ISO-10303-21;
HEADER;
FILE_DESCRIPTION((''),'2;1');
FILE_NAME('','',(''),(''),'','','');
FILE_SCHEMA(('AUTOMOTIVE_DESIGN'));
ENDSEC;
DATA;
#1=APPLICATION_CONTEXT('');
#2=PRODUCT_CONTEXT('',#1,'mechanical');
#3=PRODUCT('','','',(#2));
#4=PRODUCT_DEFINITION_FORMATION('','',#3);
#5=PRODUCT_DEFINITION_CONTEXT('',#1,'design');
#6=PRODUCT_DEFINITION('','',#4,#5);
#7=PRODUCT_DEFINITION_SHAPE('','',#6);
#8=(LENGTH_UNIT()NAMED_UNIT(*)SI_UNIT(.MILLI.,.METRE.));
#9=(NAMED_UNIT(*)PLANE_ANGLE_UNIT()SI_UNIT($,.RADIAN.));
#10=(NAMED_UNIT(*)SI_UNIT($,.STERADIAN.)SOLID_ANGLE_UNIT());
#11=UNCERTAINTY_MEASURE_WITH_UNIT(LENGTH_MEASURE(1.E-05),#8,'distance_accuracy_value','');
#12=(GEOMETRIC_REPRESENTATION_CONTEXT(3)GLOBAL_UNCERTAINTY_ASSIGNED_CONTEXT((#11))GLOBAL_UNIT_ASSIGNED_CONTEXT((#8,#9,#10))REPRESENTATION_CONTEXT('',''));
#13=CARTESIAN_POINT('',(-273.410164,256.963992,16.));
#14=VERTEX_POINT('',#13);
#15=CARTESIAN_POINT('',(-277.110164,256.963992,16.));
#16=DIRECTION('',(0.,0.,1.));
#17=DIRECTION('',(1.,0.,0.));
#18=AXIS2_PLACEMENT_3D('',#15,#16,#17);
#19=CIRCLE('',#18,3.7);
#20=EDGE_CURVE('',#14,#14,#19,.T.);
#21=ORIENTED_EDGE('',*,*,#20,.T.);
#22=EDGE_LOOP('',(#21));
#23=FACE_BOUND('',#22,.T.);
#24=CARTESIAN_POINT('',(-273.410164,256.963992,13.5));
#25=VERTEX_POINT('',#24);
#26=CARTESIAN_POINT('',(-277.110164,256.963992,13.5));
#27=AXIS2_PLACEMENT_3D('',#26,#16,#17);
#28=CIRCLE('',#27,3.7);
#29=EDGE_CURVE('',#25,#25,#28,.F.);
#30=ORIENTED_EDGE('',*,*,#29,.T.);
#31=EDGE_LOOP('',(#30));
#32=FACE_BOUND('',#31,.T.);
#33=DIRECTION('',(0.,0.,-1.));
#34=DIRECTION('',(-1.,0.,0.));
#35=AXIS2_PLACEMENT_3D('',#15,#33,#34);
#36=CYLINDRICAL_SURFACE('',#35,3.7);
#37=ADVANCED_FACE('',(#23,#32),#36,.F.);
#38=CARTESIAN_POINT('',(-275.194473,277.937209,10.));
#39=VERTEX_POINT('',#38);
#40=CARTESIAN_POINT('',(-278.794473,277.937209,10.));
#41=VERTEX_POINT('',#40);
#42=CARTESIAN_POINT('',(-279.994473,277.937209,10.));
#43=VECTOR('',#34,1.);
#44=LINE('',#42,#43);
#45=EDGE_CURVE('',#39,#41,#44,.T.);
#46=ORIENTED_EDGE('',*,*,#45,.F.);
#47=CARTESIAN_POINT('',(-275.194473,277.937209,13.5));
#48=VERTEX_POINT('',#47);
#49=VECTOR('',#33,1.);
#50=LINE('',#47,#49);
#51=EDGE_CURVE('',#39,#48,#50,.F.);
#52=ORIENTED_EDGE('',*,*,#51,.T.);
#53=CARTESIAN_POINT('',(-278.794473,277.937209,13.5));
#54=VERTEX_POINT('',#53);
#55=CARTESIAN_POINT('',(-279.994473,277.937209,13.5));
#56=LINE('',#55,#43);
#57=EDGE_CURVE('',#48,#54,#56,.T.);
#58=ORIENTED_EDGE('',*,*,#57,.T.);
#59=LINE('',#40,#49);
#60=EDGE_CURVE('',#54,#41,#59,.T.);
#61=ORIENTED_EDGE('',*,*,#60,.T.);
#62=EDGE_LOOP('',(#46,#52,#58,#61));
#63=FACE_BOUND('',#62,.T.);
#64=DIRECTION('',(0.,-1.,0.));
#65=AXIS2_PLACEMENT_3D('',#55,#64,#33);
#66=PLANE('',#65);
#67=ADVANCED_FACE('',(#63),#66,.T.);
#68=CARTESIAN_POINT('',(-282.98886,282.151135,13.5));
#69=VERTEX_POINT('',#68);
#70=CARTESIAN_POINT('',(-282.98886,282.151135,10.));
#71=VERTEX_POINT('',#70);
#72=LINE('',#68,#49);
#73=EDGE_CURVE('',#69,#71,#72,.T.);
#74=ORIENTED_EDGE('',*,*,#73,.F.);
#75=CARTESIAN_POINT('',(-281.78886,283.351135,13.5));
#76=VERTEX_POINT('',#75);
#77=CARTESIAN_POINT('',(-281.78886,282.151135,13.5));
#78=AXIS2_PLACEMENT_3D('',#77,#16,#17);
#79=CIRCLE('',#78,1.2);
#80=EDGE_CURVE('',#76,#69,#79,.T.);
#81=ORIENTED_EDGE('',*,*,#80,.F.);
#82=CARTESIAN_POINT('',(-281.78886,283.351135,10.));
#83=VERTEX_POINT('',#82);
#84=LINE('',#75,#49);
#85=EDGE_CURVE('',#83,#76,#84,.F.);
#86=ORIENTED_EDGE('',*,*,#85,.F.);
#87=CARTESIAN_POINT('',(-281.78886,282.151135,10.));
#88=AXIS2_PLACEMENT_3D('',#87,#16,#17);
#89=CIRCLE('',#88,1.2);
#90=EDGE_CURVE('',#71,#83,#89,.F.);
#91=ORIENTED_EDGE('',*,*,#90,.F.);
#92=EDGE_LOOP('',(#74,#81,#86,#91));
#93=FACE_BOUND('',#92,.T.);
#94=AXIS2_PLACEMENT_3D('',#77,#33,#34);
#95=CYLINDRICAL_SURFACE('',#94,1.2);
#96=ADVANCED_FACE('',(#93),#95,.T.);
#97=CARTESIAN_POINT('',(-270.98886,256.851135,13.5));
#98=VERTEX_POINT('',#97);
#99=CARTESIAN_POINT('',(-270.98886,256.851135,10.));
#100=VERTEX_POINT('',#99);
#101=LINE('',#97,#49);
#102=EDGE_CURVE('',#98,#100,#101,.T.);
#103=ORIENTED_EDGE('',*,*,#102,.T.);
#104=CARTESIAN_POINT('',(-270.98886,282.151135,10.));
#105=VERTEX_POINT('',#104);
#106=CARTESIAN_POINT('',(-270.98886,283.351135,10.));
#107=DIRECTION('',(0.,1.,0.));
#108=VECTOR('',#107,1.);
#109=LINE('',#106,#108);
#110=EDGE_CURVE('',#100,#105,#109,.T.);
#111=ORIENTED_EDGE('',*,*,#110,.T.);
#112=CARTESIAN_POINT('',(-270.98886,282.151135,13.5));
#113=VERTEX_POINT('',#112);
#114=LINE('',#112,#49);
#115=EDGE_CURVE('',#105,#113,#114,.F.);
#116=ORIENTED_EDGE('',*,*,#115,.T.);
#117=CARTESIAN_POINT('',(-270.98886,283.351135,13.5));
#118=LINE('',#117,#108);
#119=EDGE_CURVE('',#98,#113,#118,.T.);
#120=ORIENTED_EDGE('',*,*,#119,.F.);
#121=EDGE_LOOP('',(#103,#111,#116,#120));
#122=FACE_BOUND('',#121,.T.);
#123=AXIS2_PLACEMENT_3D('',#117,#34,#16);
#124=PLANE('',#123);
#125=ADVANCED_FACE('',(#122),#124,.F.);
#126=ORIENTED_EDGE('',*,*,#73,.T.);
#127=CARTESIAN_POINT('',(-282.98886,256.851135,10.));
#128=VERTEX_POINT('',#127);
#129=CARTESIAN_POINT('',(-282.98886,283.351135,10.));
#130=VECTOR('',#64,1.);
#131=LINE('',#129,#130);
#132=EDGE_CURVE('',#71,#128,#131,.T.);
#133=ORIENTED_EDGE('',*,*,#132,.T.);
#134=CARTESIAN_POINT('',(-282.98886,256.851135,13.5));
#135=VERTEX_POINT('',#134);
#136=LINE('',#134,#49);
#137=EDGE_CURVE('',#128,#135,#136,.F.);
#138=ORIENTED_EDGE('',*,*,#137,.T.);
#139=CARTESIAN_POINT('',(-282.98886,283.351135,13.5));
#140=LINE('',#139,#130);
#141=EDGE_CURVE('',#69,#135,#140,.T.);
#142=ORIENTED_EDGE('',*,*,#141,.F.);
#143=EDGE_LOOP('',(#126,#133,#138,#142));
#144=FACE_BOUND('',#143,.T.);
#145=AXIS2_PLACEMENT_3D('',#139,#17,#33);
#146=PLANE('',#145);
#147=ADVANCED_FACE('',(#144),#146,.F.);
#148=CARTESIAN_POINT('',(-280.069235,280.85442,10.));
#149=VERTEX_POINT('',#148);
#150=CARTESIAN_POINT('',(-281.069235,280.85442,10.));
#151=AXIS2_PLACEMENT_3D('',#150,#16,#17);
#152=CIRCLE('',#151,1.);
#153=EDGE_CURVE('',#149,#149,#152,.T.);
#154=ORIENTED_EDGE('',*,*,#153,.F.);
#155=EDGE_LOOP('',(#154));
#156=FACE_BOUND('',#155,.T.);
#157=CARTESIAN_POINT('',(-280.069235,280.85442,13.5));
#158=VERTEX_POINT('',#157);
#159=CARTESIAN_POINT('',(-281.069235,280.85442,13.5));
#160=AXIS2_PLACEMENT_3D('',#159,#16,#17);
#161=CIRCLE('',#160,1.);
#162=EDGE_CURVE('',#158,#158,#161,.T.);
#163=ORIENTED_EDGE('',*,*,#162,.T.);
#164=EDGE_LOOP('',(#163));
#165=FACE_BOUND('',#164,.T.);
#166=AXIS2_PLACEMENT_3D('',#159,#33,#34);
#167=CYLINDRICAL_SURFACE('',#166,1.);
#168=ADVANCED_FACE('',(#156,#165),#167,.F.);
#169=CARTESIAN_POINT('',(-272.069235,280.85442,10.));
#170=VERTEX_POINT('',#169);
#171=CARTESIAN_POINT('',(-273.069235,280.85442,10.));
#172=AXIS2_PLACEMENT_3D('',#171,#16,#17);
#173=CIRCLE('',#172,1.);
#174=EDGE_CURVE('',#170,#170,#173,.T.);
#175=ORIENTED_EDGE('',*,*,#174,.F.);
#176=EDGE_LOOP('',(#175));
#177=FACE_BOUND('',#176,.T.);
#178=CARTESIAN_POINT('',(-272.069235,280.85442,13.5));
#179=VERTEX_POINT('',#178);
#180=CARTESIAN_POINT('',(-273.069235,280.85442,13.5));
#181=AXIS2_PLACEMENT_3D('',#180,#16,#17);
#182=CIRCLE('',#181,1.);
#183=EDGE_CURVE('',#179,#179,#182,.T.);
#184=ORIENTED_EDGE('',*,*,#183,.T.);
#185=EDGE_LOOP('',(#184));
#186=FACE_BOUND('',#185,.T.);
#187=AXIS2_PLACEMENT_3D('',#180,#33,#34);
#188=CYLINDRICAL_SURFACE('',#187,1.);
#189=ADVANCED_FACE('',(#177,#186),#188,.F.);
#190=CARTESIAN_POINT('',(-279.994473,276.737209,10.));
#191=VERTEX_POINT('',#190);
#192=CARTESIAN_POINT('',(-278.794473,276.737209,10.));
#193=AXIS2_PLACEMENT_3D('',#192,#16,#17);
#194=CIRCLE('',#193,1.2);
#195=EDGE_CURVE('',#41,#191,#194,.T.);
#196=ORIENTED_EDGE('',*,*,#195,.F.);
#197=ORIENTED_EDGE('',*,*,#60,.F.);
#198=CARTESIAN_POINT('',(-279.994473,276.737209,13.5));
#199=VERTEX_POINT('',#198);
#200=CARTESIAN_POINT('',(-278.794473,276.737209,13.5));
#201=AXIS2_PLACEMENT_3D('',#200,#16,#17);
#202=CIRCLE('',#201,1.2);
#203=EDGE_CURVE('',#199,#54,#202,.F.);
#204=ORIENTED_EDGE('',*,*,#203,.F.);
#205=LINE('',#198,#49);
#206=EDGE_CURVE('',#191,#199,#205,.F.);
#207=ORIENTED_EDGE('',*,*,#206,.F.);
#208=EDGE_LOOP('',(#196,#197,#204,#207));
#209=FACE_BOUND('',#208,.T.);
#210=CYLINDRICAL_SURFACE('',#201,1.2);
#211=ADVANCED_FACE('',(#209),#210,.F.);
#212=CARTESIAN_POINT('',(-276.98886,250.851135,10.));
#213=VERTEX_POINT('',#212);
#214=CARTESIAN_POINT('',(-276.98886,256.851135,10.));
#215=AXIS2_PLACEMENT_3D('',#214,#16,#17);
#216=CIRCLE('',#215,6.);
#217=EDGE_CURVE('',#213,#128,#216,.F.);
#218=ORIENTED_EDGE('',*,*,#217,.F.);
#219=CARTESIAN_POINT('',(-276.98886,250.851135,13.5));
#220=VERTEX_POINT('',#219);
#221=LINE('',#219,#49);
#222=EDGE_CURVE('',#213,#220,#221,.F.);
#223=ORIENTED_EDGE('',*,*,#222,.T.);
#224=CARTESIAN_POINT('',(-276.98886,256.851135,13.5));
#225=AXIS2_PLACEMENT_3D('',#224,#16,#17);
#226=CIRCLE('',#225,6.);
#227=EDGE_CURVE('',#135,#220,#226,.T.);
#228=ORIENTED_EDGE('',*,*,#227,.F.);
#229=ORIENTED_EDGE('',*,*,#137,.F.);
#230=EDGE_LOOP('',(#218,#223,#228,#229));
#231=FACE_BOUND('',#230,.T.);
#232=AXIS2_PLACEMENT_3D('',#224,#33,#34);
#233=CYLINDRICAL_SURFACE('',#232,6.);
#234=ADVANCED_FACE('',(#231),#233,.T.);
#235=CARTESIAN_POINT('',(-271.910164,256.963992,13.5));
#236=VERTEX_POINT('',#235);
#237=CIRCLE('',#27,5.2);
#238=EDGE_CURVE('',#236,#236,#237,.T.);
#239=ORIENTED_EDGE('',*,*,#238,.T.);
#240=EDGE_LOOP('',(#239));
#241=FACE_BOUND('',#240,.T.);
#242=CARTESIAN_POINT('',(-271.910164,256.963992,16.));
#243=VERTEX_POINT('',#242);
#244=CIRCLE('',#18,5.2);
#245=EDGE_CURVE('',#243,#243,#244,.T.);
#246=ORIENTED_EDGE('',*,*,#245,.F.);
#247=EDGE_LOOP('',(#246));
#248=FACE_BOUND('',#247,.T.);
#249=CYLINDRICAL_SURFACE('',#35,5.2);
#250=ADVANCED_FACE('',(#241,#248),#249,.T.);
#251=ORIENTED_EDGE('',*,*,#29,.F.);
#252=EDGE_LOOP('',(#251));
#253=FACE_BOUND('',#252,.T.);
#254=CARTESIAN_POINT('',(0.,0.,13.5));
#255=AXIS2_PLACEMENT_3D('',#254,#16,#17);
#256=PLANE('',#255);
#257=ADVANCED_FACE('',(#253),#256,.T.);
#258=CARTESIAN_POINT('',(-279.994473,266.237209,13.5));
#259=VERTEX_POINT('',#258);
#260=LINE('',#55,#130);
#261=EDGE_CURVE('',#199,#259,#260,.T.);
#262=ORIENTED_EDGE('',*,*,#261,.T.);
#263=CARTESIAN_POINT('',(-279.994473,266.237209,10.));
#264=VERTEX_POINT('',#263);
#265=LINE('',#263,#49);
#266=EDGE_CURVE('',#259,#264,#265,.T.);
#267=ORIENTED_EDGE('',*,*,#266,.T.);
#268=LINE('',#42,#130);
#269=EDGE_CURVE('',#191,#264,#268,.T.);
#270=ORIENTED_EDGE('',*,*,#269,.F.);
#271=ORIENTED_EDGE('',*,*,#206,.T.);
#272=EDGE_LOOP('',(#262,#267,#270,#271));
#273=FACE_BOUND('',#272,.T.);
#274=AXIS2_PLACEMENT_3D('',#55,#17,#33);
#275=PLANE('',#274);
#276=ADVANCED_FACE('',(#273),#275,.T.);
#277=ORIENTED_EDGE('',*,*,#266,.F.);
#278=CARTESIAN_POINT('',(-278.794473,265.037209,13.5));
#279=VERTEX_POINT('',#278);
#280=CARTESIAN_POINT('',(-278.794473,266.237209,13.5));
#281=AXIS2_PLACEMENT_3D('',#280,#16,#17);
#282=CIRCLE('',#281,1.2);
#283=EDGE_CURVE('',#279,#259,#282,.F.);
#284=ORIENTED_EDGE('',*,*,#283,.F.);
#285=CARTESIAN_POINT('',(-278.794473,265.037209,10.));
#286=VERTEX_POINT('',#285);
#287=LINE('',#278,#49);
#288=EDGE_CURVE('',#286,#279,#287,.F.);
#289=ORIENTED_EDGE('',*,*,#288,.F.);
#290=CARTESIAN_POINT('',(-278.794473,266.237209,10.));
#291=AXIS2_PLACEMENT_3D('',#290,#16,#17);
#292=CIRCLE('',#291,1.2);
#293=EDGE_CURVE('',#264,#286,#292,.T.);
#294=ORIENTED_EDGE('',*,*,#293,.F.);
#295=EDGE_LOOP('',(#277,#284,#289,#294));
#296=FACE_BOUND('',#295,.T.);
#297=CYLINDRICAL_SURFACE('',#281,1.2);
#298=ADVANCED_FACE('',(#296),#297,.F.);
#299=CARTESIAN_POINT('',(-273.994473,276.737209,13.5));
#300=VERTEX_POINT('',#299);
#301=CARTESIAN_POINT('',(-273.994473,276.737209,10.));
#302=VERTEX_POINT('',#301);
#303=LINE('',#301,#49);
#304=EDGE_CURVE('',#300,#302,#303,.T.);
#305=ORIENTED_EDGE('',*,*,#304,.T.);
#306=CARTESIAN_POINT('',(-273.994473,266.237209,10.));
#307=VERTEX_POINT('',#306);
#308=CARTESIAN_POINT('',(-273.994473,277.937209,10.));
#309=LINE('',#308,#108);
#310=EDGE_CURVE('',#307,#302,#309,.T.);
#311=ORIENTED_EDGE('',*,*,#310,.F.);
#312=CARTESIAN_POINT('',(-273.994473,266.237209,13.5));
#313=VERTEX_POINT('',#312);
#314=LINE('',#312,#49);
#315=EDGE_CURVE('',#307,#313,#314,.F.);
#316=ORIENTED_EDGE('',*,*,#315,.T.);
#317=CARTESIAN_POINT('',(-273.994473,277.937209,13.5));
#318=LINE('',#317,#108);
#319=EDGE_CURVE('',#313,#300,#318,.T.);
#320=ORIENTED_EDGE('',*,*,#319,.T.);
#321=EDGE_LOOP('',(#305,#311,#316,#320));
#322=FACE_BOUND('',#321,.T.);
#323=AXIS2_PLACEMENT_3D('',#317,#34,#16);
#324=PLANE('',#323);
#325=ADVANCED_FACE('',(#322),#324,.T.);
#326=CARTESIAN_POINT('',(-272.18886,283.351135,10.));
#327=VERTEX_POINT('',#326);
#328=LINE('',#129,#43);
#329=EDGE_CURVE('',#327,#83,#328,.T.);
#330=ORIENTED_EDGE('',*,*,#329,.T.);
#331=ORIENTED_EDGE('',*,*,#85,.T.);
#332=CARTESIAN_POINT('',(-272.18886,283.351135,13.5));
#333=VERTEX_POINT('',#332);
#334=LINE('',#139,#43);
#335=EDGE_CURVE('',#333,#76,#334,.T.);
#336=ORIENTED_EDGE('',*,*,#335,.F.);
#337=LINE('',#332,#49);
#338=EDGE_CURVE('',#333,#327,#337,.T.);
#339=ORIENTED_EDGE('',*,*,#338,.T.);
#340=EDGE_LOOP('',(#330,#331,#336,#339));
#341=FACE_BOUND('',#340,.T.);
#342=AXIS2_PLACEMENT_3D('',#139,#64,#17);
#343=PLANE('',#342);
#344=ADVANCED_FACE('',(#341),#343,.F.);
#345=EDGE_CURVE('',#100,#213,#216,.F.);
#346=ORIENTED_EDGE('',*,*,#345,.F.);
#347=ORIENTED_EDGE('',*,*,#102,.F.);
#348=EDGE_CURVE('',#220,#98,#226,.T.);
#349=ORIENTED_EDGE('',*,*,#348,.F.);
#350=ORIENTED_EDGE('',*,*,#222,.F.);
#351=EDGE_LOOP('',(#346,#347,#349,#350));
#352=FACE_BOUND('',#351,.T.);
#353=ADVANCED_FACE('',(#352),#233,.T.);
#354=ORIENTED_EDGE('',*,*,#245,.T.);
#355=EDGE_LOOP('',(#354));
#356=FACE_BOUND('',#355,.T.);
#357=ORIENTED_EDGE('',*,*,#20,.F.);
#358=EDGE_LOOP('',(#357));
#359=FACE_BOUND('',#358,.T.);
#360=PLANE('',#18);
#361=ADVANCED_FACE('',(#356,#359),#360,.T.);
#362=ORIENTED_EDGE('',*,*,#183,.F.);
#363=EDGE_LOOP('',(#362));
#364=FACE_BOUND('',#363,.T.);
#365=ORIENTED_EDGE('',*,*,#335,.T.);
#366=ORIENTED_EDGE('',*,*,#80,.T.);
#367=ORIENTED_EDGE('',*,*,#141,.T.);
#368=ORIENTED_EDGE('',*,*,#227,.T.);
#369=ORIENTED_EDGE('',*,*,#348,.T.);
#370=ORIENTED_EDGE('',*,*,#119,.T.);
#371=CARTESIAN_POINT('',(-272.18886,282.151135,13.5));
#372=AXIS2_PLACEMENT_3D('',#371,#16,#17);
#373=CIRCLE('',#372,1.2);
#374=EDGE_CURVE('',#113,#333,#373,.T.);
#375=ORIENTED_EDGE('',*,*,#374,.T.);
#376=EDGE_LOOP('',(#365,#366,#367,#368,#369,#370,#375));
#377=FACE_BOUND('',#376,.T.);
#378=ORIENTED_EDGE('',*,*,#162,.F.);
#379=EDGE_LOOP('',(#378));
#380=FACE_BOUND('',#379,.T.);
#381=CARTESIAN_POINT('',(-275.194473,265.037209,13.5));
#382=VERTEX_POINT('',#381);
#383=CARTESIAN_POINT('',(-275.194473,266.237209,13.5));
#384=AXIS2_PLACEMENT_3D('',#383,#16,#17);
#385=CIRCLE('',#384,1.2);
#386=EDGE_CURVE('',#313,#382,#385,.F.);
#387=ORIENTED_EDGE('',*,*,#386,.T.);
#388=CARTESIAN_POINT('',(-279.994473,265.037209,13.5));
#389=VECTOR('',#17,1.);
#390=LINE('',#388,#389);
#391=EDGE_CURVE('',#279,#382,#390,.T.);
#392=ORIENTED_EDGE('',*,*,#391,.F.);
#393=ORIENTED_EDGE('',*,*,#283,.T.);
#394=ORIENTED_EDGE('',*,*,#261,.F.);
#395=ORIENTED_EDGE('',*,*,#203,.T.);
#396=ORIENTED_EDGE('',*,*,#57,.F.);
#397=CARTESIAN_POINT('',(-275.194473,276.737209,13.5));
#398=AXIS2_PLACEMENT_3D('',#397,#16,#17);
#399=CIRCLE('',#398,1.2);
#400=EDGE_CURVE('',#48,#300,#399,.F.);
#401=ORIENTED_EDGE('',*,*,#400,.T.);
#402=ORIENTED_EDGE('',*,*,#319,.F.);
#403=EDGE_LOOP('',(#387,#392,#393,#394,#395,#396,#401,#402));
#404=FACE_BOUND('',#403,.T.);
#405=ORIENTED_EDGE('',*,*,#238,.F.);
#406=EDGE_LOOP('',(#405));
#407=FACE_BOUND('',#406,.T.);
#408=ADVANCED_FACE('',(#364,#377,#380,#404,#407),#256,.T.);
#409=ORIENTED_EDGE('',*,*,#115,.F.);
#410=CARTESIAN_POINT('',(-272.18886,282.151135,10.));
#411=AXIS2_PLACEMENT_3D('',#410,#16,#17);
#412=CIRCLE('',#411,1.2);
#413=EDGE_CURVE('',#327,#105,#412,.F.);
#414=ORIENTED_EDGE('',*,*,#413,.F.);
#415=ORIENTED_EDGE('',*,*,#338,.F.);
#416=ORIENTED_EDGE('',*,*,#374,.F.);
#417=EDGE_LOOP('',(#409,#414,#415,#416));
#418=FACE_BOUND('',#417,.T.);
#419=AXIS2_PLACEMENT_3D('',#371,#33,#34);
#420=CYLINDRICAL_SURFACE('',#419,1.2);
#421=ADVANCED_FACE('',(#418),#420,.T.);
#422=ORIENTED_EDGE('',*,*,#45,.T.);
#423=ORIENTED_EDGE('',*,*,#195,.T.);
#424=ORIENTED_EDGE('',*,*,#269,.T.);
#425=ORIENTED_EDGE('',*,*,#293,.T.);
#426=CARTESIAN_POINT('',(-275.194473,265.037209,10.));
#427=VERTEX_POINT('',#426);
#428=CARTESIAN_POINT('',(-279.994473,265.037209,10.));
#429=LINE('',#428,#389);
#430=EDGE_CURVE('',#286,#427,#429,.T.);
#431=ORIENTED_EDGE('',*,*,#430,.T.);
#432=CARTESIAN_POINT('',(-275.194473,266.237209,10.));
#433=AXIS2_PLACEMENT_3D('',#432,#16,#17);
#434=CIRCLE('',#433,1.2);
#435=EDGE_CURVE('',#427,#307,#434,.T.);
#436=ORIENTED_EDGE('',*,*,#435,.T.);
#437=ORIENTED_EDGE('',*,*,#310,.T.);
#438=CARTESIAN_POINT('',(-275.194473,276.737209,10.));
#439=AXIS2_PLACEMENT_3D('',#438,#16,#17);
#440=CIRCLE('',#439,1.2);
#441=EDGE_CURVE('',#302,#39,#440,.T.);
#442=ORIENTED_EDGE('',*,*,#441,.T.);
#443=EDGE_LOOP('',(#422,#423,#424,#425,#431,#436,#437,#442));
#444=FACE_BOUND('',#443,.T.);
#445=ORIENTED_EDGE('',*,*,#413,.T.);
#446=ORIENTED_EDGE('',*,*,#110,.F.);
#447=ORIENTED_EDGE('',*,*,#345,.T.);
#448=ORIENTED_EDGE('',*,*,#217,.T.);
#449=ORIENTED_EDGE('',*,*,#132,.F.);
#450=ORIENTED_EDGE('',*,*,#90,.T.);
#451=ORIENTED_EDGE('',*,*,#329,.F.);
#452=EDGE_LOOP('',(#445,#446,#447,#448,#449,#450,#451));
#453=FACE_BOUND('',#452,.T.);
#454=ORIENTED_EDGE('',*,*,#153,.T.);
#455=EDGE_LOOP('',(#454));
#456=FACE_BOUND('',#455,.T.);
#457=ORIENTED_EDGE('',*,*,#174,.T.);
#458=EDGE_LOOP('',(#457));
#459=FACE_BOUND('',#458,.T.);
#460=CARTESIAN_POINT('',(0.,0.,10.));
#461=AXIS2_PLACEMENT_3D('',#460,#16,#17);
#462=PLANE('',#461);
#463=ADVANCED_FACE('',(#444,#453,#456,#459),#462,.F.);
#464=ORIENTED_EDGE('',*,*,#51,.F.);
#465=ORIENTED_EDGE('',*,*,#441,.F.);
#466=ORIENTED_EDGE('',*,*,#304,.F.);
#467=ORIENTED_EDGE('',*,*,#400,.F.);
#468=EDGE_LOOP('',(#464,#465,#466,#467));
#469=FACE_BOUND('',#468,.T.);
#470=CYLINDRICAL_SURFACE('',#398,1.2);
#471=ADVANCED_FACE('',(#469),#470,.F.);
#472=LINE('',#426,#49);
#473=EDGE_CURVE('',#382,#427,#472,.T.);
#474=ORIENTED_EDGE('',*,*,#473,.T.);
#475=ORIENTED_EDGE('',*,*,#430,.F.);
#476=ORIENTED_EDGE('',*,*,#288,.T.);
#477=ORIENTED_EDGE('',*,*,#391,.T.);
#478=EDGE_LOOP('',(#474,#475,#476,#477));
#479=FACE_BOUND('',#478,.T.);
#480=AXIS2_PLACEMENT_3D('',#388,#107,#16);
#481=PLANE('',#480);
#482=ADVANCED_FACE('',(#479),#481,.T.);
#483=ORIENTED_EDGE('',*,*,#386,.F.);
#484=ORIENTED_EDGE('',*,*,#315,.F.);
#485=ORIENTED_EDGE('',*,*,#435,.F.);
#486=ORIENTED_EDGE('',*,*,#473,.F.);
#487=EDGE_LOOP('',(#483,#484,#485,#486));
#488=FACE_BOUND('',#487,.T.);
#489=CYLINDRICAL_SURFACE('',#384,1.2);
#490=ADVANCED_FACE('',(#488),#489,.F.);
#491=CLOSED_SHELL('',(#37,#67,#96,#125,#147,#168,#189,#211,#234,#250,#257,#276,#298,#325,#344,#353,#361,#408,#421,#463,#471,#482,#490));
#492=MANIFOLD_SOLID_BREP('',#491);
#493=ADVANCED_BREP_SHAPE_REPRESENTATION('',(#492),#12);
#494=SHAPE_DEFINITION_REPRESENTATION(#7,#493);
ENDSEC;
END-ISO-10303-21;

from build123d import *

# Parameters (mm, degrees)
SKETCH1_W           = 12
SKETCH1_H           = 32.5
SKETCH1_R           = 1
SKETCH1_W_2         = 6
SKETCH1_H_2         = 12.9
BOSS_EXTRUDE1_DEPTH = 3.5
FILLET1_R           = 1.2
FILLET2_R           = 6
SKETCH2_R           = 5.2
SKETCH2_R_2         = 3.7
BOSS_EXTRUDE2_DEPTH = 2.5


with BuildPart() as part:
    # Sketch1 → Boss-Extrude1 (new body)
    with BuildSketch(Plane.XY.offset(10)):
        with Locations((-276.988860295, 267.101135254)):
            Rectangle(SKETCH1_W, SKETCH1_H)
        with Locations((-281.069234982, 280.854420413)):
            Circle(SKETCH1_R, mode=Mode.SUBTRACT)
        with Locations((-273.069234982, 280.854420413)):
            Circle(SKETCH1_R, mode=Mode.SUBTRACT)
        with Locations((-276.994472892, 271.487209026)):
            Rectangle(SKETCH1_W_2, SKETCH1_H_2, mode=Mode.SUBTRACT)
    extrude(amount=BOSS_EXTRUDE1_DEPTH)

    # Fillet1
    fillet1_edges = [part.edges().sort_by_distance(p)[0] for p in [
        (-279.994472892, 277.937209026, 11.75),
        (-279.994472892, 265.037209026, 11.75),
        (-273.994472892, 265.037209026, 11.75),
        (-273.994472892, 277.937209026, 11.75),
        (-282.988860295, 283.351135254, 11.75),
        (-270.988860295, 283.351135254, 11.75),
    ]]
    fillet(fillet1_edges, radius=FILLET1_R)

    # Fillet2
    fillet2_edges = [part.edges().sort_by_distance(p)[0] for p in [
        (-282.988860295, 250.851135254, 11.75),
        (-270.988860295, 250.851135254, 11.75),
    ]]
    fillet(fillet2_edges, radius=FILLET2_R - 0.0001)  # a hair under: the kernel refuses the full size

    # Sketch2 → Boss-Extrude2 (add)
    with BuildSketch(Plane.XY.offset(13.5)):
        with Locations((-277.110164077, 256.96399239)):
            Circle(SKETCH2_R)
        with Locations((-277.110164077, 256.96399239)):
            Circle(SKETCH2_R_2, mode=Mode.SUBTRACT)
    extrude(amount=BOSS_EXTRUDE2_DEPTH)


solid = part.part
